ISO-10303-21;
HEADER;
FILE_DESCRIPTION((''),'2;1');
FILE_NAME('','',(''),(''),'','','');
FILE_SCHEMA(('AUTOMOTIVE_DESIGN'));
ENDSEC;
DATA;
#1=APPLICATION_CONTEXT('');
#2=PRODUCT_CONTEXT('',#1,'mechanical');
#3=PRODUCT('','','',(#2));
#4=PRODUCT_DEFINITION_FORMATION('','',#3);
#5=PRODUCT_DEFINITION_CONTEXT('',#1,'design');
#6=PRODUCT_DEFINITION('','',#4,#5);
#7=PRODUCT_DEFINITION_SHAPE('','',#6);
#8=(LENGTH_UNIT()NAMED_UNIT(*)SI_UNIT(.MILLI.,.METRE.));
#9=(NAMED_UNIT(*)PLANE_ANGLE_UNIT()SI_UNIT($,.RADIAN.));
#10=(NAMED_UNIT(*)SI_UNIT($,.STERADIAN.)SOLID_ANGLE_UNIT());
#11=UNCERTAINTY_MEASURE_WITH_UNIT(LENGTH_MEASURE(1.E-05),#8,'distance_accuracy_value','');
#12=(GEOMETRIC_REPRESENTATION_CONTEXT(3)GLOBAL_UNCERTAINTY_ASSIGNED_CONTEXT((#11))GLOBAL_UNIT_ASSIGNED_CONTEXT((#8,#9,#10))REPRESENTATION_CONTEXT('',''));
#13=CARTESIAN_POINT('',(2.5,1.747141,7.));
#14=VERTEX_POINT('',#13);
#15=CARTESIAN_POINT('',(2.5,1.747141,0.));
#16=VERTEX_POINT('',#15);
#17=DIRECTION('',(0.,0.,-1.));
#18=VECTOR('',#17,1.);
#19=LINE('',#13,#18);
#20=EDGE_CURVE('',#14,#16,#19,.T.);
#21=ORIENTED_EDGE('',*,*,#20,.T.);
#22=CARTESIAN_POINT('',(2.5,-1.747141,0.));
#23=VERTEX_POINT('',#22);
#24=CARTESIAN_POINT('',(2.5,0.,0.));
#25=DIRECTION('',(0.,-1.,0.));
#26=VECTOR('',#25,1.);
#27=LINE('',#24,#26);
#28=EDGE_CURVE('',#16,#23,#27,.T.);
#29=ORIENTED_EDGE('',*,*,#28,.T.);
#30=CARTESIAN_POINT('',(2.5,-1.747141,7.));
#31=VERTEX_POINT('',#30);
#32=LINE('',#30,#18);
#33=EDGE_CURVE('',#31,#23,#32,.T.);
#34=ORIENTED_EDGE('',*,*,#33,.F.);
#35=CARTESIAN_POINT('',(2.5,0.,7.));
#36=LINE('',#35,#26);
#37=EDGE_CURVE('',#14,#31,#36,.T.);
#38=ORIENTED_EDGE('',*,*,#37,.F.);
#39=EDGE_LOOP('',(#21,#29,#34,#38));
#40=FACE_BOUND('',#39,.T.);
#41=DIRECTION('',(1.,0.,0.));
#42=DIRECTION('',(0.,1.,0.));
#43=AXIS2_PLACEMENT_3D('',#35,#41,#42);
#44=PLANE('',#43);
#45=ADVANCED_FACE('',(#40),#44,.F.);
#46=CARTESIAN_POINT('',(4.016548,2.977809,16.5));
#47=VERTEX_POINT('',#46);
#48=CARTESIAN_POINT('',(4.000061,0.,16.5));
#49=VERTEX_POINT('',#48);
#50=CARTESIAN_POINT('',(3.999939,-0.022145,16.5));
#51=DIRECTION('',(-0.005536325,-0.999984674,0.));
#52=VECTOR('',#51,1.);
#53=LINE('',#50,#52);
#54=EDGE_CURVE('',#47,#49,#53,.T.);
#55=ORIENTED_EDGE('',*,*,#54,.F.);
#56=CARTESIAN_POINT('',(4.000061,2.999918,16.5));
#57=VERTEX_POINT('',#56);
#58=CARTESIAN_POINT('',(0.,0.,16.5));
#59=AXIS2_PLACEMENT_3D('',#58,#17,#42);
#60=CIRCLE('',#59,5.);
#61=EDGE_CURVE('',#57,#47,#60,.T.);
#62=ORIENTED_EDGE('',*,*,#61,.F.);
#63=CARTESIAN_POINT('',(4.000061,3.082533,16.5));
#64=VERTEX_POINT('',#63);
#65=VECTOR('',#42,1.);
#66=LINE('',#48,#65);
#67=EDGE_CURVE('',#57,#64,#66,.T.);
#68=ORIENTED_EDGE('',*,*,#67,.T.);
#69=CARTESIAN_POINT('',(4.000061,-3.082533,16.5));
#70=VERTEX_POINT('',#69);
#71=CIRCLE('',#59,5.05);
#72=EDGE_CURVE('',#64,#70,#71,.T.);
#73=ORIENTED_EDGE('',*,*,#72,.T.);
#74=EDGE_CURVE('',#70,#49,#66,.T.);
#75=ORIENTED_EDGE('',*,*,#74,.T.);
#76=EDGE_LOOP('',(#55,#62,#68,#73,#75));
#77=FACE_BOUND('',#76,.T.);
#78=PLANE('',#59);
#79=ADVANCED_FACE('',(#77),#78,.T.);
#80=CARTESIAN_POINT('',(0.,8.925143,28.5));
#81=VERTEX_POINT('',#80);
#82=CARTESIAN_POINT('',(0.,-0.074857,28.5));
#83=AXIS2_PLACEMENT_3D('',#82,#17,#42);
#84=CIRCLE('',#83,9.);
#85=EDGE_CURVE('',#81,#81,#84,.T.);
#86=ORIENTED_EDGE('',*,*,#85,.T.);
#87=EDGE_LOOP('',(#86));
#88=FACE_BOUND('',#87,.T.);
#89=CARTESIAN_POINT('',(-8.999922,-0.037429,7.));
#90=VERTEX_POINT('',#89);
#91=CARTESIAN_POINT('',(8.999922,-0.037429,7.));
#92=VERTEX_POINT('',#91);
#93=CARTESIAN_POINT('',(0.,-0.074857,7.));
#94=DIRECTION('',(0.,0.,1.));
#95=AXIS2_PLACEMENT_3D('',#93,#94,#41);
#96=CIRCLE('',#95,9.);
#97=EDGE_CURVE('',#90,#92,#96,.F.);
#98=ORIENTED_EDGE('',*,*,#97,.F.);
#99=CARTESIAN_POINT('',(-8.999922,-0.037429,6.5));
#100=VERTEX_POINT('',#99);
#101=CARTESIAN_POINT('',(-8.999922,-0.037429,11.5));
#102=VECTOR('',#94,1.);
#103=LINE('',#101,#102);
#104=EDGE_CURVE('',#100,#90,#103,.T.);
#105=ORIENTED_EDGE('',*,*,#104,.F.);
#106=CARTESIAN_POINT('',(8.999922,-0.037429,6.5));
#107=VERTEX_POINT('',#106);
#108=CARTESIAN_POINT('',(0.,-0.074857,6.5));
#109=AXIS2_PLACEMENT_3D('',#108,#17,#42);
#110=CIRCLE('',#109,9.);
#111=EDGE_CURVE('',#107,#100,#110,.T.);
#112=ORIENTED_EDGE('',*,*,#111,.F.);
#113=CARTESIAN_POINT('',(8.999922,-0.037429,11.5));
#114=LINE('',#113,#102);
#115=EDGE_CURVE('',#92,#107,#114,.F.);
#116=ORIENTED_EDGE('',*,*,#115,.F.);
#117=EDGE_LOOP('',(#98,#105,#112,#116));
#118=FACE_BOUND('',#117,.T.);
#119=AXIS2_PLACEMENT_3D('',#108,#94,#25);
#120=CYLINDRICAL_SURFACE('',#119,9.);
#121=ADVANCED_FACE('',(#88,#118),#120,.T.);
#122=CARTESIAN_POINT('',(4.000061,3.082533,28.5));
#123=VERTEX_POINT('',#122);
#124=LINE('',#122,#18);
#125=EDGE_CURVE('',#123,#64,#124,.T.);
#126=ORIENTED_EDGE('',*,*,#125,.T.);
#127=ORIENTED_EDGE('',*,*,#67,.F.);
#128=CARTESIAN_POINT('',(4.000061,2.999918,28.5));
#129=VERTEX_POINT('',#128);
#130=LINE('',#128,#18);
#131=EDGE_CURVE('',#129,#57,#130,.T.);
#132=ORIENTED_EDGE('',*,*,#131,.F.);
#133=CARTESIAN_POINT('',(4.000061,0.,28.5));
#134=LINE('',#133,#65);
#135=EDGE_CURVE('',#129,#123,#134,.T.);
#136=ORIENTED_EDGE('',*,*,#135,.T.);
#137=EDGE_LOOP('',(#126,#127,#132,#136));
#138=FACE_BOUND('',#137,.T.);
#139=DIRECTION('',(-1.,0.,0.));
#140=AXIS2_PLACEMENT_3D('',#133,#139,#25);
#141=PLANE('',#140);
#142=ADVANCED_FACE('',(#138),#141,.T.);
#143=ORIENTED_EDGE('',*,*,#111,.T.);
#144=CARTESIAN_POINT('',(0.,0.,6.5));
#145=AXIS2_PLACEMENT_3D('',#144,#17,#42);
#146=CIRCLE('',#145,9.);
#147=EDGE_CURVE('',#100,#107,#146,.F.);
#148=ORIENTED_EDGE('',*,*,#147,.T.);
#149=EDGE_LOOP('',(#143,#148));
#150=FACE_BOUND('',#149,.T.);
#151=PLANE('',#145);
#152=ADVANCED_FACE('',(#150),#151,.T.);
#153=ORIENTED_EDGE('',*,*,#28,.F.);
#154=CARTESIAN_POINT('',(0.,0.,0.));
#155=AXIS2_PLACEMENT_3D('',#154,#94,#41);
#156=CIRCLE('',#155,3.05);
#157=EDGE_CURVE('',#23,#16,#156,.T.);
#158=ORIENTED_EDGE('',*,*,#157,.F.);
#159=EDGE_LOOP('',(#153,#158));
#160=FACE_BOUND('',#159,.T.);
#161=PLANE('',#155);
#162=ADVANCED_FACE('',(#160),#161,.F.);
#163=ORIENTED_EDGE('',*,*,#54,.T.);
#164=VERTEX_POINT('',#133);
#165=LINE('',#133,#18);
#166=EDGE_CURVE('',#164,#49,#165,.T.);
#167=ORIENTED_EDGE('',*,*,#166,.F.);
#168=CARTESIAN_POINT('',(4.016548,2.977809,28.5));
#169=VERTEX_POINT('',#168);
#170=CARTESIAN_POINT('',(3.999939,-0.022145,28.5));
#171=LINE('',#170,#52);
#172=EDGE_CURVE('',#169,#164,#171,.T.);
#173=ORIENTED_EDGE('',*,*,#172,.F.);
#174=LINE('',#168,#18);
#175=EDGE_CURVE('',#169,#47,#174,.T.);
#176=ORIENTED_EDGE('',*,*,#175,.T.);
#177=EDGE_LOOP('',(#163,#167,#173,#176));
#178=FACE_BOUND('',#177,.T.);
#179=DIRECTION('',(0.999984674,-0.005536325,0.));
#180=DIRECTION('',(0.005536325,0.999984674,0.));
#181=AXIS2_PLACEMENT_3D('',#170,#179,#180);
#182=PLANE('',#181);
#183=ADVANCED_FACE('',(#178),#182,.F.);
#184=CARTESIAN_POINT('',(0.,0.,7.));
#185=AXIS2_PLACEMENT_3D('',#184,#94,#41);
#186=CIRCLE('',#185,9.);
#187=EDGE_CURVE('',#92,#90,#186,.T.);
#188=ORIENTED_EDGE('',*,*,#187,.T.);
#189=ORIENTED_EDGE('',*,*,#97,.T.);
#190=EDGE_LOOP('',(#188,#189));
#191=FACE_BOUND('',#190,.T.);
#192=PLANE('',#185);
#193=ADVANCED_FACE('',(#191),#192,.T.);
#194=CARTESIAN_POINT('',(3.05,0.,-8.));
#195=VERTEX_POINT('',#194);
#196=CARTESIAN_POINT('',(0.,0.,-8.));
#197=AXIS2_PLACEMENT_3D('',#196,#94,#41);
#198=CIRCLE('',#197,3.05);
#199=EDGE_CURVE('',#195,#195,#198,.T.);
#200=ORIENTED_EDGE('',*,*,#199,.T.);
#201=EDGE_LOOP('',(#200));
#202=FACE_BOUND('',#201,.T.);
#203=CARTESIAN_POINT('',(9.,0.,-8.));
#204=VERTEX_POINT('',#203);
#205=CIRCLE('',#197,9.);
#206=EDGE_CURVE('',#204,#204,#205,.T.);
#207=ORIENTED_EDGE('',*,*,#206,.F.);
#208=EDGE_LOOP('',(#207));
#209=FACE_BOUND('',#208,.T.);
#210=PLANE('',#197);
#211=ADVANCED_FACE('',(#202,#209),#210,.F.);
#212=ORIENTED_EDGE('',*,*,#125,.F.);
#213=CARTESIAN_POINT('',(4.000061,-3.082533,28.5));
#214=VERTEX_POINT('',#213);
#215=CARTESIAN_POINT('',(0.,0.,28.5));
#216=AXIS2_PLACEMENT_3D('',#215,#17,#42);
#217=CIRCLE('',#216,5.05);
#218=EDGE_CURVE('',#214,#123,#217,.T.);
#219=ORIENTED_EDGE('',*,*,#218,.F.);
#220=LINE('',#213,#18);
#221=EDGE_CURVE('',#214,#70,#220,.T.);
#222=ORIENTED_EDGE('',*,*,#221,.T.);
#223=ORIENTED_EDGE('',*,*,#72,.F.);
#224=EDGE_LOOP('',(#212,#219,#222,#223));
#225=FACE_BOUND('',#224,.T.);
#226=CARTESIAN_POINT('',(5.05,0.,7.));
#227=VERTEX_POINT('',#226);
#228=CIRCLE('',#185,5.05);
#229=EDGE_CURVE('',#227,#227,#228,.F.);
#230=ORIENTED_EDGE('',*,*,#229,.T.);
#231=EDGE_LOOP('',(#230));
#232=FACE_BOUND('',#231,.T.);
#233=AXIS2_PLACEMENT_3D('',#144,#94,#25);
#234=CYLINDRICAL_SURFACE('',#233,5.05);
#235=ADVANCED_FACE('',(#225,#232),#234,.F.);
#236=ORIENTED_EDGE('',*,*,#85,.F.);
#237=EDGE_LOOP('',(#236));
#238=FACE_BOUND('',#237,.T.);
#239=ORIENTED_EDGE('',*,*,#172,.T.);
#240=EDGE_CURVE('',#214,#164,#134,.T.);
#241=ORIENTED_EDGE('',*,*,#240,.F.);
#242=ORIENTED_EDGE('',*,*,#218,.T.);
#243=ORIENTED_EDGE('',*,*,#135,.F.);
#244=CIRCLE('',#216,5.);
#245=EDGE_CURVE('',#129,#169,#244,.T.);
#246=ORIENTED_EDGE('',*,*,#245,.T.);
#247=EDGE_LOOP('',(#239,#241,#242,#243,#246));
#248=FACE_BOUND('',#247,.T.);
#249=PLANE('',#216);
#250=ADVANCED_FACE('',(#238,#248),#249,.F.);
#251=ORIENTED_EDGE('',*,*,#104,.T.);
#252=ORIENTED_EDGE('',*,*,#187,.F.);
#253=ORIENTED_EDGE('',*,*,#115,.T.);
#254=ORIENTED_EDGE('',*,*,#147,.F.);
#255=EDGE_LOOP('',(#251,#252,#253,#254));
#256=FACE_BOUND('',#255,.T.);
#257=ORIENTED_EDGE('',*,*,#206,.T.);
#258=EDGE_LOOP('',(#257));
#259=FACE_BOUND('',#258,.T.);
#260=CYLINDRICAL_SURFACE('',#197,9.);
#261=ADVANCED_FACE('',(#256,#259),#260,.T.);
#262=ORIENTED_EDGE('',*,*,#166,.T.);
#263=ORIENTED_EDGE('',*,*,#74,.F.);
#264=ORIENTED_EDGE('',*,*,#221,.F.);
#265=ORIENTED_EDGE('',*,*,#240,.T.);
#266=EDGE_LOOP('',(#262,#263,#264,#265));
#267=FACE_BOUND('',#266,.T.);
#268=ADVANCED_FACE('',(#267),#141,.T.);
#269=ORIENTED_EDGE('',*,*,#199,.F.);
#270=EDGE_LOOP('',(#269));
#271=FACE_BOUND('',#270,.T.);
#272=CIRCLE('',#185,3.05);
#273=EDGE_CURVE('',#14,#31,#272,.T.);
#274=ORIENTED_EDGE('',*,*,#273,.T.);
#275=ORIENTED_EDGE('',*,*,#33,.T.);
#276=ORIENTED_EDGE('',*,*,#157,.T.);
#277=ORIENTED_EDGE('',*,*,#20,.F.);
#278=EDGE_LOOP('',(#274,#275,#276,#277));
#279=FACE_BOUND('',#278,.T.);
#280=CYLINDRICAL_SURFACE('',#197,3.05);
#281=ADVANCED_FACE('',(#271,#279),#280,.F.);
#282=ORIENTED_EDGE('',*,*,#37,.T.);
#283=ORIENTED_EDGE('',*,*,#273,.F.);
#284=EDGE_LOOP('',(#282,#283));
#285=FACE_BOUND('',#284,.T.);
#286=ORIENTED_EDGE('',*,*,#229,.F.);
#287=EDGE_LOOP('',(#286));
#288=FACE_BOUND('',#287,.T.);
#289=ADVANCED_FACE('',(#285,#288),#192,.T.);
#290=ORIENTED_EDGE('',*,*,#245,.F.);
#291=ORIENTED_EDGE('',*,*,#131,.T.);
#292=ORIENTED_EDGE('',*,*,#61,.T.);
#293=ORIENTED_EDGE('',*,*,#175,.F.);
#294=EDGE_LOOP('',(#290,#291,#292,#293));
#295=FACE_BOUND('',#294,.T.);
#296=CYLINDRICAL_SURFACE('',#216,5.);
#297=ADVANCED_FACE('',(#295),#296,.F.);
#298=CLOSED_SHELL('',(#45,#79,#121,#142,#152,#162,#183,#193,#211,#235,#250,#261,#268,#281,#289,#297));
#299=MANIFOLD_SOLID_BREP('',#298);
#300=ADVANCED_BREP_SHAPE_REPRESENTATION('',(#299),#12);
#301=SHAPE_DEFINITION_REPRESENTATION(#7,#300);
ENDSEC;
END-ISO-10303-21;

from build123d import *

# Parameters (mm, degrees)
SKETCH1_R           = 9
SKETCH1_R_2         = 3.05
BOSS_EXTRUDE1_DEPTH = 8
BOSS_EXTRUDE2_START = 7
SKETCH1_3_R         = 9
BOSS_EXTRUDE2_DEPTH = 7
SKETCH3_R           = 9
BOSS_EXTRUDE3_DEPTH = 12
SKETCH3_3_R         = 9
BOSS_EXTRUDE4_DEPTH = 10


with BuildPart() as part:
    # Sketch1 → Boss-Extrude1 (new body)
    with BuildSketch(Plane.XY):
        Circle(SKETCH1_R)
        Circle(SKETCH1_R_2, mode=Mode.SUBTRACT)
    extrude(amount=-BOSS_EXTRUDE1_DEPTH)

    # Sketch1<3> → Boss-Extrude2 (add)
    with BuildSketch(Plane.XY.offset(BOSS_EXTRUDE2_START)):
        Circle(SKETCH1_3_R)
        with BuildLine():
            Line((2.5, 1.747140521), (2.5, -1.747140521))
            ThreePointArc((2.5, -1.747140521), (-3.05, 0), (2.5, 1.747140521))
        make_face(mode=Mode.SUBTRACT)
    extrude(amount=-BOSS_EXTRUDE2_DEPTH)



with BuildPart() as body_2:
    # Sketch3 → Boss-Extrude3 (new body)
    with BuildSketch(Plane(origin=(0, 0, 16.5), x_dir=(-1, 0, 0), z_dir=(0, 0, -1))):
        with Locations((0, -0.074857464)):
            Circle(SKETCH3_R)
        with BuildLine():
            Line((-4.000061363, 2.999918181), (-4.000061363, 3.082532902))
            ThreePointArc((-4.000061363, 3.082532902), (5.05, 0), (-4.000061363, -3.082532902))
            Line((-4.000061363, -3.082532902), (-4.000061363, 0))
            Line((-4.000061363, 0), (-4.016547732, 2.977808644))
            ThreePointArc((-4.016547732, 2.977808644), (-4.008319792, 2.98887478), (-4.000061363, 2.999918181))
        make_face(mode=Mode.SUBTRACT)
    extrude(amount=-BOSS_EXTRUDE3_DEPTH)


with BuildPart() as part_1:
    add(part.part)

    add(body_2.part)  # Boss-Extrude4 merges body 2
    # Sketch3<3> → Boss-Extrude4 (add)
    with BuildSketch(Plane(origin=(0, 0, 16.5), x_dir=(-1, 0, 0), z_dir=(0, 0, -1))):
        with Locations((0, -0.074857464)):
            Circle(SKETCH3_3_R)
        with BuildLine():
            ThreePointArc((5.05, 0), (1.62821837, -4.780314314), (-4.000061363, -3.082532902))
            ThreePointArc((-4.000061363, -3.082532902), (-5.05, 0), (-4.000061363, 3.082532902))
            ThreePointArc((-4.000061363, 3.082532902), (1.62821837, 4.780314314), (5.05, 0))
        make_face(mode=Mode.SUBTRACT)
    extrude(amount=BOSS_EXTRUDE4_DEPTH)


solid = part_1.part
